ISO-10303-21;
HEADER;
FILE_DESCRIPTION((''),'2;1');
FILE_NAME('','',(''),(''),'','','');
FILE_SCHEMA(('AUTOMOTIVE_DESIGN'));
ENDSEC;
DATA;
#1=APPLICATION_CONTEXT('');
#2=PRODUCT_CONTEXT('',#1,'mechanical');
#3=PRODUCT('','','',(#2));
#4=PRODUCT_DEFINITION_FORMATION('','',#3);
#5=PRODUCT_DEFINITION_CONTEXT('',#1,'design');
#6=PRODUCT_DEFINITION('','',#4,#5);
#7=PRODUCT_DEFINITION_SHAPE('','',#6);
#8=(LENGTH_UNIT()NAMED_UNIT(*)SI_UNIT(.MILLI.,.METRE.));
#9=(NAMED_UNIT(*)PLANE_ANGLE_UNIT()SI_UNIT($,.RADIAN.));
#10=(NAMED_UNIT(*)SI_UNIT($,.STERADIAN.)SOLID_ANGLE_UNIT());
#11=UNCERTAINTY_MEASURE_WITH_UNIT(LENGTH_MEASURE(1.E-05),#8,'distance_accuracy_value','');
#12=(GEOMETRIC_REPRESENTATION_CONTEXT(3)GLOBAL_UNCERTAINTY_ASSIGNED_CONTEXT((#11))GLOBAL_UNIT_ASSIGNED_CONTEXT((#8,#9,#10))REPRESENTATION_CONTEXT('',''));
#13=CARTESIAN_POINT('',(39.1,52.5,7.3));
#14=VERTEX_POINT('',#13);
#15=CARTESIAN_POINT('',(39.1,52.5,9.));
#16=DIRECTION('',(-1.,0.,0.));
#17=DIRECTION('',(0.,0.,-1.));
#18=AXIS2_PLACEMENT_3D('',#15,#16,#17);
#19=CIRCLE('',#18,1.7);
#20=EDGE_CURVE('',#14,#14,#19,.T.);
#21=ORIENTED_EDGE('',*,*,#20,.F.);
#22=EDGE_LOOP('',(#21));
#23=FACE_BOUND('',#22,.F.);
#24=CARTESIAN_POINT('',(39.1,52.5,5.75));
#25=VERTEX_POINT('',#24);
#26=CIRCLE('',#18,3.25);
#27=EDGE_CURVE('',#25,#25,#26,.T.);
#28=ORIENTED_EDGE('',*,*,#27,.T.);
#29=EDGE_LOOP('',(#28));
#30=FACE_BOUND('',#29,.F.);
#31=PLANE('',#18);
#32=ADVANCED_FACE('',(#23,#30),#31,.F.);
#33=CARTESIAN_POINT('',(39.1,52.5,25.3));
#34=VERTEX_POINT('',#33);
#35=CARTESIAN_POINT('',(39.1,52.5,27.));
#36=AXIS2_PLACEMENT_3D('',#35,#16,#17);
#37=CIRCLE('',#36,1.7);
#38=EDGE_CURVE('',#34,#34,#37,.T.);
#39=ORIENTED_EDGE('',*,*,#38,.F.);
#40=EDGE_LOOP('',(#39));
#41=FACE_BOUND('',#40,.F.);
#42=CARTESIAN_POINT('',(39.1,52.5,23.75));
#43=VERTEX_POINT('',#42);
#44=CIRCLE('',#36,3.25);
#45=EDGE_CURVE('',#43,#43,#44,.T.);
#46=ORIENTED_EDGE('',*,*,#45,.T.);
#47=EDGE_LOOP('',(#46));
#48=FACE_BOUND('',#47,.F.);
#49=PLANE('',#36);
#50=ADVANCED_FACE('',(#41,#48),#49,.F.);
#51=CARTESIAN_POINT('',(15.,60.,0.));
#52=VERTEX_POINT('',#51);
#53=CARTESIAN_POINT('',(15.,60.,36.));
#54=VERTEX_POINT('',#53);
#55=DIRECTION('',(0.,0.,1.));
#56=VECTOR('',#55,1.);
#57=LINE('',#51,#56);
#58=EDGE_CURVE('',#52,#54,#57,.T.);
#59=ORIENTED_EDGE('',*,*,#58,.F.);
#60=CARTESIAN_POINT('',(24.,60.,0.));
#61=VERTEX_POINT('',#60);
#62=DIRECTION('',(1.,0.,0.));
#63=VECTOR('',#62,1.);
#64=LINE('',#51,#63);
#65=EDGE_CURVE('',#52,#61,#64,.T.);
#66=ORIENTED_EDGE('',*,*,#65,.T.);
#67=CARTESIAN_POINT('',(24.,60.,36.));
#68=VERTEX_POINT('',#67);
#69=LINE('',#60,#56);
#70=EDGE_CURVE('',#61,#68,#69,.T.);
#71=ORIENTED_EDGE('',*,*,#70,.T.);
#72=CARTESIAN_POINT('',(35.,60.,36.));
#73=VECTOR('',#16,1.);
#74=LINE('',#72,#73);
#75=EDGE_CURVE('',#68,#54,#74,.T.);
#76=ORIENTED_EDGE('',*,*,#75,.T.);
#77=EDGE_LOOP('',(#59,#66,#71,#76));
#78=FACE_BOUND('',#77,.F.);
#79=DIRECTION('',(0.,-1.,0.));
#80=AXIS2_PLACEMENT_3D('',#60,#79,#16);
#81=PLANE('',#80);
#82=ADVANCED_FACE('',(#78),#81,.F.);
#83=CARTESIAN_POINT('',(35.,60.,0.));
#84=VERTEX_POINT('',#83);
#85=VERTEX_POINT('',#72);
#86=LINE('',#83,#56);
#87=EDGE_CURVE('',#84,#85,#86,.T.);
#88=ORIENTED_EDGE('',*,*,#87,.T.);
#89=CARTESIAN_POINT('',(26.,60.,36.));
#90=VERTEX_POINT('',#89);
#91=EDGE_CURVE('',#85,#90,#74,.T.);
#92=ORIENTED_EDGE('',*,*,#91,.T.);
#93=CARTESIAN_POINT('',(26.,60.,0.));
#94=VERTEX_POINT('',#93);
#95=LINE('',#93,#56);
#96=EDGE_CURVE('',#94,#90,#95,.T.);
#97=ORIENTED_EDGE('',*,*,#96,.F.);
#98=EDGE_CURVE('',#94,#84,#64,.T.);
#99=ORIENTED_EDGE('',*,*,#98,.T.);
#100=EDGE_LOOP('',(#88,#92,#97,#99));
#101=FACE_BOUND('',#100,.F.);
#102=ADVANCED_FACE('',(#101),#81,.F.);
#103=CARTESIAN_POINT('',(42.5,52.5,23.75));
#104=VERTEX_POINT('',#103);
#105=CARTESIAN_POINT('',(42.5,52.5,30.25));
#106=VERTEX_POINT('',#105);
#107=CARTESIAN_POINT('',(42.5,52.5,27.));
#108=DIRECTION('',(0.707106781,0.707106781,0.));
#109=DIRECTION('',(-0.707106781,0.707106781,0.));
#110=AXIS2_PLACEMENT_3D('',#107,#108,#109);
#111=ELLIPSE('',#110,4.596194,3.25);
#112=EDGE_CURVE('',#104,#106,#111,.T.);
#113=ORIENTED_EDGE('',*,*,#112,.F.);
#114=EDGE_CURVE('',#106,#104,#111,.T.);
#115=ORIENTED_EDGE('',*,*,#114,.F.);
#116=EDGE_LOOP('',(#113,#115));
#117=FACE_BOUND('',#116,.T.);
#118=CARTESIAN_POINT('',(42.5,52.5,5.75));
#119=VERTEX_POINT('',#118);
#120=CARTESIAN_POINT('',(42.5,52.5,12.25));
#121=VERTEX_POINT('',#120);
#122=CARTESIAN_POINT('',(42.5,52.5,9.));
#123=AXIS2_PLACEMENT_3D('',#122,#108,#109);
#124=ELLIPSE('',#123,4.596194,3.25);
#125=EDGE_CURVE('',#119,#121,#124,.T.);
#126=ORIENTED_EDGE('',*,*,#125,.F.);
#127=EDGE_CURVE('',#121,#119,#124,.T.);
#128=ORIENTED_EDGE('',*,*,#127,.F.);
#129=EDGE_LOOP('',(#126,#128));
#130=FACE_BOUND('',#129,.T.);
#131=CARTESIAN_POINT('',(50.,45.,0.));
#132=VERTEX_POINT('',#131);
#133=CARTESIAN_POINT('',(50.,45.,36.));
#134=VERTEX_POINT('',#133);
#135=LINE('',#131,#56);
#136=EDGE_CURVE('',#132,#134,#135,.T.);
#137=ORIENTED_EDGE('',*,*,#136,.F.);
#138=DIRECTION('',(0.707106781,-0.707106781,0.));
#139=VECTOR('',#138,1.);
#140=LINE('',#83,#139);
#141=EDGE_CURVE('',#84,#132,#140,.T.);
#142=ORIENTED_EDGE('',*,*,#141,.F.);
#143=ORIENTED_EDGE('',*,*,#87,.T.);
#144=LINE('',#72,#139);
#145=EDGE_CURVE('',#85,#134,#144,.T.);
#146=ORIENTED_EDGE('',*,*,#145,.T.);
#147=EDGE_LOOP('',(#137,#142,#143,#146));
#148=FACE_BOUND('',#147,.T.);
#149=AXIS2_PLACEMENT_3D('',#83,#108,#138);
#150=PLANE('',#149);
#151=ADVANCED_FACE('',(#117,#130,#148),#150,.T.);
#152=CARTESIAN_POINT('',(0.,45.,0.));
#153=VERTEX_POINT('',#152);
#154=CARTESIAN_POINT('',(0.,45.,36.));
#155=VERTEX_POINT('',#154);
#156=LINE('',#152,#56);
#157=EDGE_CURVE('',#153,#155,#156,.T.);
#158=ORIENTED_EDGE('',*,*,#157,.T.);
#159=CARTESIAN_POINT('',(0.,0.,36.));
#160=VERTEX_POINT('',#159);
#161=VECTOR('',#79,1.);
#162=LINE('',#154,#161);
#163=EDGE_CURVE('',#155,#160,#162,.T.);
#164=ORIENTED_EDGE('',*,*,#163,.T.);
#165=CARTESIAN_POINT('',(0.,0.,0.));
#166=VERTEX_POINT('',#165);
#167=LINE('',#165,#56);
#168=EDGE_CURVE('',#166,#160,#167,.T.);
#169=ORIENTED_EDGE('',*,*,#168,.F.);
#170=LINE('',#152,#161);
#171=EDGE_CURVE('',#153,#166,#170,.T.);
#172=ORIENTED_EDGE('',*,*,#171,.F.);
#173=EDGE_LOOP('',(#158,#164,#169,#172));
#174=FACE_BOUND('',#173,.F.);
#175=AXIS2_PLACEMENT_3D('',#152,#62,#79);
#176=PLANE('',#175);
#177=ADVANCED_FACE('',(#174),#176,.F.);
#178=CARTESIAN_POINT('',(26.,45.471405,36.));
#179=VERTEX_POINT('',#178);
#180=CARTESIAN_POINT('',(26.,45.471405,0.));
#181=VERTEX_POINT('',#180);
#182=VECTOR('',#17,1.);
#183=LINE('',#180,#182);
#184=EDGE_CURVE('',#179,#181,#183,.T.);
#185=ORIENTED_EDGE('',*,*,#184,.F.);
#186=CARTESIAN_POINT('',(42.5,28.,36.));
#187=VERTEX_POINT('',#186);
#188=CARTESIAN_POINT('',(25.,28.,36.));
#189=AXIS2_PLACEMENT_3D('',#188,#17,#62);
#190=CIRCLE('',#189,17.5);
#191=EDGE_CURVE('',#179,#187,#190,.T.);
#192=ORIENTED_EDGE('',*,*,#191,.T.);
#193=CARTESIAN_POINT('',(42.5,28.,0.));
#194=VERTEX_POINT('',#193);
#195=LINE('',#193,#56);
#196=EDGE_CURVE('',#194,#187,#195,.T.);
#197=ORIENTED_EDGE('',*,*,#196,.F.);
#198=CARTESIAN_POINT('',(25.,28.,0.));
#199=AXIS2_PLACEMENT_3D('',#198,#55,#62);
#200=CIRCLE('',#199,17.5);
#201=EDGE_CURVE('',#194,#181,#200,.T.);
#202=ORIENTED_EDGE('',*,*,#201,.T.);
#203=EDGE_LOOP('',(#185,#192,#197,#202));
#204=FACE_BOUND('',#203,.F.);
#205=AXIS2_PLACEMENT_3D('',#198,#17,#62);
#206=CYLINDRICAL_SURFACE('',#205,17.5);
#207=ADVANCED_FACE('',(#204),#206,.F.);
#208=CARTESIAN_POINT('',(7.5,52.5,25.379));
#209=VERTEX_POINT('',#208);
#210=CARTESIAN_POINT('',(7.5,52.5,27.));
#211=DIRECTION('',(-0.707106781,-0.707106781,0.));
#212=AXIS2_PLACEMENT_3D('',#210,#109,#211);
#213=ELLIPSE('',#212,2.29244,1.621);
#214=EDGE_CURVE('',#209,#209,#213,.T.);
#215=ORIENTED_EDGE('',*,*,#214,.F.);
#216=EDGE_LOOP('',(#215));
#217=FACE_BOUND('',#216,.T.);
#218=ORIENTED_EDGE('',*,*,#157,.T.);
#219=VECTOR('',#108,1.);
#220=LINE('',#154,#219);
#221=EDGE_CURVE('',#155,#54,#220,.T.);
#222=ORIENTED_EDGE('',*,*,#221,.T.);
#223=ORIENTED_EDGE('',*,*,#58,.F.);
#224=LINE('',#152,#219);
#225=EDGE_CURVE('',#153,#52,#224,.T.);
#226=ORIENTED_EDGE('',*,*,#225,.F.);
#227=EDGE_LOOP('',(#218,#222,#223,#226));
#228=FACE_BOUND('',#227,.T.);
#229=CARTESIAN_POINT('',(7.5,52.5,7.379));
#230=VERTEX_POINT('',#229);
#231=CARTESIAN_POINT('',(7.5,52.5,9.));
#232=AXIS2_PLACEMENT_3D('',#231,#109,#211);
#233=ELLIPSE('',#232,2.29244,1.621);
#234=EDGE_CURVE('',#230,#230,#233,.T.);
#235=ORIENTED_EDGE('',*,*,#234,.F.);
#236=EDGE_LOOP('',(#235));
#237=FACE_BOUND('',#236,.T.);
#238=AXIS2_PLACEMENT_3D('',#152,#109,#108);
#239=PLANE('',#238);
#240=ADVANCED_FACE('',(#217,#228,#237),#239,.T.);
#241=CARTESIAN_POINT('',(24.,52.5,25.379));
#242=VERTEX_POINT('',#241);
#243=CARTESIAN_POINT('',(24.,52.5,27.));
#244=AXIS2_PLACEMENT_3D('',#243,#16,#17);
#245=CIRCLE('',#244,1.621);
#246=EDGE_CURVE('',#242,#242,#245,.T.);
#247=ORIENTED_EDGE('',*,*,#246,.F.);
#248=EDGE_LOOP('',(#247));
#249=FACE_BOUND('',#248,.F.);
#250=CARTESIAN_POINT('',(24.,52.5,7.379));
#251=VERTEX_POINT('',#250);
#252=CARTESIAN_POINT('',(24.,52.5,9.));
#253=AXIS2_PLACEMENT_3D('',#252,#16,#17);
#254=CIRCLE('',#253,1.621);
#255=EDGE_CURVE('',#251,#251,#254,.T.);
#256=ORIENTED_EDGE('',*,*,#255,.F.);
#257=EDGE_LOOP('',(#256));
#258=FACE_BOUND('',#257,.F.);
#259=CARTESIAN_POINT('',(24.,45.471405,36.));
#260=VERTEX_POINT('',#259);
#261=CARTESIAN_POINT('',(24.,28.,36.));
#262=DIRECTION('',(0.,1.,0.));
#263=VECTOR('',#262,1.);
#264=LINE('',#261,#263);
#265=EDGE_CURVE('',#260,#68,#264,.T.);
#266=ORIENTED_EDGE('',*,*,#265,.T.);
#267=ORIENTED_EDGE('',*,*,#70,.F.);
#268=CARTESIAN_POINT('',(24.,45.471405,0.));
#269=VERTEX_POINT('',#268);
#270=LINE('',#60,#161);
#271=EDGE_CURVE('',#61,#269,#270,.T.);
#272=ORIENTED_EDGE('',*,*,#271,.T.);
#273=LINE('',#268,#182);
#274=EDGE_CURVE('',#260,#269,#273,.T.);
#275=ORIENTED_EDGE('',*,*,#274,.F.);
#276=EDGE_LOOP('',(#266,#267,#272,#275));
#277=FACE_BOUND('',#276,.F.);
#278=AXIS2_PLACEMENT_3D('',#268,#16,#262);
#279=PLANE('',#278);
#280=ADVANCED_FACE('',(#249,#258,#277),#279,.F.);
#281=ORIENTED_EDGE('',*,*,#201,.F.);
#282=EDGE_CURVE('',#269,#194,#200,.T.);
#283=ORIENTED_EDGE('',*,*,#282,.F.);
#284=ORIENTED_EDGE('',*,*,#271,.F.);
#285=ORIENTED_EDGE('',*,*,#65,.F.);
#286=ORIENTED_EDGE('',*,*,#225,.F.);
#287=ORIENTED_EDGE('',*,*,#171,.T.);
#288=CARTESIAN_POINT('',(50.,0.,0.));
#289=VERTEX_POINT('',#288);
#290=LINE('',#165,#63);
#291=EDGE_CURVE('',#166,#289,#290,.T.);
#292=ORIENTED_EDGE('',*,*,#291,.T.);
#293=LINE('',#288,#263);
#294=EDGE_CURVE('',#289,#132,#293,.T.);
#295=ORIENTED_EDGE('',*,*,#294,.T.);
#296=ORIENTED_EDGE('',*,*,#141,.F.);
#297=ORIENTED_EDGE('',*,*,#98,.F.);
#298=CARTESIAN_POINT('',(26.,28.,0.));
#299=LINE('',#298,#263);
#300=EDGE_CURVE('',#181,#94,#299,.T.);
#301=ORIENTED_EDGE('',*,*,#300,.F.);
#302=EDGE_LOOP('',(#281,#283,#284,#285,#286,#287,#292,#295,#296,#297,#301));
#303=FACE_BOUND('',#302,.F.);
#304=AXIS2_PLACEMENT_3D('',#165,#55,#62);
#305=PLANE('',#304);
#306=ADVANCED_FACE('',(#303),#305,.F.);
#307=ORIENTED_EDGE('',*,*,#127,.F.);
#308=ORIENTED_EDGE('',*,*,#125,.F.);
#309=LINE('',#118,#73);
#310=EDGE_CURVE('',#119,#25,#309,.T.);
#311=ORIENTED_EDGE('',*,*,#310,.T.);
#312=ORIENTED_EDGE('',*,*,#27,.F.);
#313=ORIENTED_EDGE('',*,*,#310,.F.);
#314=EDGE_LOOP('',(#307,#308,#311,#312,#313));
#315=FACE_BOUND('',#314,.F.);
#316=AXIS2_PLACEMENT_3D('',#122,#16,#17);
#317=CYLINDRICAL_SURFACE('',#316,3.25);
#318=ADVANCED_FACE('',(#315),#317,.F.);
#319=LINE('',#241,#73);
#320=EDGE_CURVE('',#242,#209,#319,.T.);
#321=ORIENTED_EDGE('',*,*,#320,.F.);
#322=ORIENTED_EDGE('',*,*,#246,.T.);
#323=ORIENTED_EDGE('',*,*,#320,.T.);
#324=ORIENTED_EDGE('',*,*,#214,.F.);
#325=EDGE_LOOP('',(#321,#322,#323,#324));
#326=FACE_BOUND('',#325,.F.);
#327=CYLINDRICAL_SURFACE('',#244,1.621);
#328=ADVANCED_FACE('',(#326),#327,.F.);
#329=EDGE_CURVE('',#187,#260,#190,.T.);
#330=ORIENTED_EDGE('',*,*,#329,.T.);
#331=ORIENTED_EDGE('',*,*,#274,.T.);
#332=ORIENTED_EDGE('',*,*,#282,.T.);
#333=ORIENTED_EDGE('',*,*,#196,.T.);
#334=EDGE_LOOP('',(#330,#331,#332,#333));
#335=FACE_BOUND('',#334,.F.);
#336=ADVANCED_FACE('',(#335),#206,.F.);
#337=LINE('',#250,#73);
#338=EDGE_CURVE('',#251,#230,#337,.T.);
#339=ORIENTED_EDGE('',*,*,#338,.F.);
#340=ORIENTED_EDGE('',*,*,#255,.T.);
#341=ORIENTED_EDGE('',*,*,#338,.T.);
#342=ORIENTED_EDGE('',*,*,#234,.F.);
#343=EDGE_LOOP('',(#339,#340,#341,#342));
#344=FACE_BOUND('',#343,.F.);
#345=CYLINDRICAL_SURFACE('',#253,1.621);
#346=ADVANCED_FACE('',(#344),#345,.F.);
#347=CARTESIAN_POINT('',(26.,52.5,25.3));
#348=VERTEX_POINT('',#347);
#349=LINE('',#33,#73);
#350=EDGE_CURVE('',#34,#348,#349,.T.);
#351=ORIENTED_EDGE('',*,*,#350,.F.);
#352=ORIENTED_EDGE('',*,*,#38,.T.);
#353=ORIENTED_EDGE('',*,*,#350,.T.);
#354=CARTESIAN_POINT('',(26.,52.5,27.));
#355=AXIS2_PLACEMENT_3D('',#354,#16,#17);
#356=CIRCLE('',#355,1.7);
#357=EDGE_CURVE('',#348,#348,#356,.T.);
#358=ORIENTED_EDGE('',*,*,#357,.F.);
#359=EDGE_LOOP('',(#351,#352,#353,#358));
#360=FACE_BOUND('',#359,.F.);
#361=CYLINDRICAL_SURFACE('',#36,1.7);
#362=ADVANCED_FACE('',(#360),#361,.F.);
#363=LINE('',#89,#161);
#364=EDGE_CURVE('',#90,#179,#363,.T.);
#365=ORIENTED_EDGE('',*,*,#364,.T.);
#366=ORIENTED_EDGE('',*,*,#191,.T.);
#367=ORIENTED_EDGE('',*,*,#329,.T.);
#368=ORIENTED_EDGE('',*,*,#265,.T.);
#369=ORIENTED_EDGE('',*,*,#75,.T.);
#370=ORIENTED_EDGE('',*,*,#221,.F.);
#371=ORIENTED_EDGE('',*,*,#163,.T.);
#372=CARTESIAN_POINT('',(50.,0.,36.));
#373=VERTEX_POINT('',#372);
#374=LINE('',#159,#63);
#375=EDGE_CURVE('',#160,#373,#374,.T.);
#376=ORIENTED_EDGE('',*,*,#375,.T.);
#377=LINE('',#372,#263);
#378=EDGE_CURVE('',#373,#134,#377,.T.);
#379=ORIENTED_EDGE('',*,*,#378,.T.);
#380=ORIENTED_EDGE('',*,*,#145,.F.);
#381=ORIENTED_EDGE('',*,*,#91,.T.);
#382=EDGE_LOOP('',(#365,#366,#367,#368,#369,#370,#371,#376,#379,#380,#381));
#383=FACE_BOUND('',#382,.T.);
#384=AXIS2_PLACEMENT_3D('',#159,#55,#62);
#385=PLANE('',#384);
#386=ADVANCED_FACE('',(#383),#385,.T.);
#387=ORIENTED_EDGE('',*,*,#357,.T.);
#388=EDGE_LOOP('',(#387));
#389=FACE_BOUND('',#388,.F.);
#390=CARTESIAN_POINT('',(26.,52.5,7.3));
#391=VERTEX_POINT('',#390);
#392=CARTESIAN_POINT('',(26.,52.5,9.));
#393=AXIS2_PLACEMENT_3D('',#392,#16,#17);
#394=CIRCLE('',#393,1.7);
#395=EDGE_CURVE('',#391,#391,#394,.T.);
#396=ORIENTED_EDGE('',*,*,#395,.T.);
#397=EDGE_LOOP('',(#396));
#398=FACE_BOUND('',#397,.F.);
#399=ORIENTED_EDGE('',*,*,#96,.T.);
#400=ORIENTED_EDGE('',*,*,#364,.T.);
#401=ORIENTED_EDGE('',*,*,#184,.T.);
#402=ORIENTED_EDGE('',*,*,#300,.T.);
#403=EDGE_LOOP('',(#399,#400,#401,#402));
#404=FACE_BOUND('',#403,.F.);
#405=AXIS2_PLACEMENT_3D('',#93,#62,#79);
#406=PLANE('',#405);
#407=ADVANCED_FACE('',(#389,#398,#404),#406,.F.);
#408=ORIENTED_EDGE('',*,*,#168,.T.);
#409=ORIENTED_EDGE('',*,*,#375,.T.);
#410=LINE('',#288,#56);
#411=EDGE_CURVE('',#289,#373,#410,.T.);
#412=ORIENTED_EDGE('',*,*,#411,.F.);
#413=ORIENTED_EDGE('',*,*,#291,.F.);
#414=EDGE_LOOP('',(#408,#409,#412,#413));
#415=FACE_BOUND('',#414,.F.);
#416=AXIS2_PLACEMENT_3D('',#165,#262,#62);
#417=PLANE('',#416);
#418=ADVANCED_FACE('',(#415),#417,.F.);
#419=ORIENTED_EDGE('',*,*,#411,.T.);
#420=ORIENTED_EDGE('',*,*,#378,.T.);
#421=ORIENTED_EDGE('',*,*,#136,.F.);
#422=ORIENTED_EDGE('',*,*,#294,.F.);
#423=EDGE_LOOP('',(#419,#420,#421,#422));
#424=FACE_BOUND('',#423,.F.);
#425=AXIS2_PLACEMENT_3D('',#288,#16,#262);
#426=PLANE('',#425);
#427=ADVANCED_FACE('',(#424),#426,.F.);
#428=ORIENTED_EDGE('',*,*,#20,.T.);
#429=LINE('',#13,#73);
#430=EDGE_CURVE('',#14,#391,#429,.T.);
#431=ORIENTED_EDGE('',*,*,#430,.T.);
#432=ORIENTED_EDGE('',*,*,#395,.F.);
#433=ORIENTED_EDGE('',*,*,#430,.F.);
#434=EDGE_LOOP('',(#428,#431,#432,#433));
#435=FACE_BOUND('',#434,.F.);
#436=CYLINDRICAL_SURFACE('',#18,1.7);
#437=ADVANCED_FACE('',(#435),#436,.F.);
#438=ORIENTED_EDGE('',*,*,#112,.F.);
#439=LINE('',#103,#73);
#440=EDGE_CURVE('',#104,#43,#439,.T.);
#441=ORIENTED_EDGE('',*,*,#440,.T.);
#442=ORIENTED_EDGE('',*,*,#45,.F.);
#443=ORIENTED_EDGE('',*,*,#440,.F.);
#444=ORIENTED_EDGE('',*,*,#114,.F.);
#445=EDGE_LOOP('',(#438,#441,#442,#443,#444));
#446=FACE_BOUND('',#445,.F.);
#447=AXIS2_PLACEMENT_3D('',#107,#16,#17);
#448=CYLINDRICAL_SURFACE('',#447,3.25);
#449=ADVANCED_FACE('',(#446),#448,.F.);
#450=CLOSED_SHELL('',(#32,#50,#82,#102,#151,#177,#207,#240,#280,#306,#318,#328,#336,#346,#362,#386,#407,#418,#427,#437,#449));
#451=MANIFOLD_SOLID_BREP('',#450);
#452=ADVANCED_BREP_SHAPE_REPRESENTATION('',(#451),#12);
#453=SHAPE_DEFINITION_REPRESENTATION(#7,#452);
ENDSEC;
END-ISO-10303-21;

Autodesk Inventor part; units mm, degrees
sketch "Skizze1" plane through (0, 0, 0) normal (0, 0, 1) x (1, 0, 0)
  line L0 (0, 0) -> (50, 0)
  line L1 (50, 0) -> (50, 45)
  line L2 (35, 60) -> (15, 60)
  line L3 (0, 45) -> (0, 0)
  circle A0 centre (25, 28) radius 17.5
  line L4 (25, 28) -> (25, 0) construction
  line L5 (0, 45) -> (15, 60)
  line L6 (35, 60) -> (50, 45)
  line L7 (24, 60) -> (26, 60)
  line L8 (26, 60) -> (26, 28)
  line L9 (26, 28) -> (24, 28)
  line L10 (24, 28) -> (24, 60)
  point P0 (50, 60)
  point P1 (0, 60)
  point P2 (25, 60)
  dimension "d0" = 50
  dimension "d1" = 35
  dimension "d2" = 60
  dimension "d3" = 15
  dimension "d4" = 15
  dimension "d5" = 15
  dimension "d6" = 15
  dimension "d7" = 28
  dimension "d10" = 2
extrude "Extrusion1" add sketch "Skizze1" along normal blind 36 contours L3 L5 L2 L10 A0 L8 L6 L1 L0 | L2 L8 A0 L10
extrude "Extrusion2" cut sketch "Skizze1" along normal up to surface (36 mm away) contours L2 L8 A0 L10 | A0 L8 L9 L10 picked at (24.8888, 33.8323)
ref_plane "Arbeitsebene1" through (42.5, 0, 0) normal (1, 0, 0) x (0, 0, -1)
sketch "Skizze3" plane through (42.5, 0, 0) normal (1, 0, 0) x (0, 0, -1)
  line L0 (0, 60) -> (-36, 60) construction
  line L1 (0, 45) -> (-36, 45) construction
  line L2 (-36, 45) -> (-36, 60) construction
  line L3 (-36, 52.5) -> (0, 52.5) construction
  line L4 (0, 45) -> (0, 60) construction
  point P0 (0, 0)
  point P1 (-18, 52.5)
  point P2 (-27, 52.5)
  point P3 (-9, 52.5)
  dimension "d44" = 9
  dimension "d45" = 9
ref_plane "Arbeitsebene2" through (0, 0, 18) normal (0, 0, 1) x (1, 0, 0)
ref_plane "Arbeitsebene3" through (0, 0, 27) normal (0, 0, 1) x (1, 0, 0)
ref_plane "Arbeitsebene4" through (0, 0, 9) normal (0, 0, -1) x (-1, 0, 0)
sketch "Skizze5" plane through (50, 0, 36) normal (1, 0, 0) x (0, 0, -1)
  line L0 (18, -12) -> (18, 72) construction
  line L1 (9, -12) -> (9, 72) construction
  line L2 (27, 72) -> (27, -12) construction
  point P0 (36, 0)
  dimension "Hole_Dist2Center" = 9
  dimension "d37" = 9
hole "Bohrung2" at (42.5, 52.5, 27) at (42.5, 52.5, 9) direction (-1, 0, 0) diameter 3.4 depth 18.5 counterbore diameter 6.5 counterbore depth 3.4 clearance for "Inbusschraube DIN EN ISO 4762" size "M3" standard "DIN"
delete faces "Fläche löschen1" heal yes whole lump no faces at (42.5, 51.6084, 27.6154) (42.5, 51.6084, 9.6154)
sketch "Skizze4" plane through (24, 45.4714, 0) normal (1, 0, 0) x (0, 0, -1)
  line L0 (-18, 7.0286) -> (-27, 7.0286) construction
  line L1 (-27, -57.4714) -> (-27, 26.5286) construction
  line L2 (-9, 26.5286) -> (-9, -57.4714) construction
  point P0 (0, -45.4714)
  point P1 (-9, 7.0286)
hole "Bohrung3" at (24, 52.5, 27) at (24, 52.5, 9) direction (-1, 0, 0) diameter 3.242 end through all thread size "M4x0.7" class "6H" standard "ISO Metric profile"
sketch "Skizze7" plane through (0, 0, 0) normal (0, 0, -1) x (-1, 0, 0)
  line L0 (-43.9281, 6.4649) -> (-5.9676, 6.4649) construction
  line L1 (0, 0) -> (-50, 0) construction
  line L2 (-25, 0) -> (-24.9479, 6.4649) construction
  line L3 (0, 45) -> (0, 0) construction
  line L4 (-50, 0) -> (-50, 45) construction
  circle A0 centre (-43.9281, 6.4649) radius 2.5 construction
  circle A1 centre (-5.9676, 6.4649) radius 2.5 construction
  dimension "d50" = 50
  dimension "d51" = 5
equation "\"d0\" = Fixation_Width"
equation "\"d4\" = d3"
equation "\"d5\" = d3"
equation "\"d6\" = d5"
equation "\"d11\" = Fixation_Thickness"
equation "\"d44\" = Hole_Dist2Center"
equation "\"d45\" = d44"
equation "\"Fixation_Thickness\" = 40"
equation "\"Fixation_Width\" = 50"
equation "\"FixationHole_Dist\" = 28"
equation "\"d21\" = -0.5 * d5"
properties part number "MotorFixation_ParallelMecha_Holder"
